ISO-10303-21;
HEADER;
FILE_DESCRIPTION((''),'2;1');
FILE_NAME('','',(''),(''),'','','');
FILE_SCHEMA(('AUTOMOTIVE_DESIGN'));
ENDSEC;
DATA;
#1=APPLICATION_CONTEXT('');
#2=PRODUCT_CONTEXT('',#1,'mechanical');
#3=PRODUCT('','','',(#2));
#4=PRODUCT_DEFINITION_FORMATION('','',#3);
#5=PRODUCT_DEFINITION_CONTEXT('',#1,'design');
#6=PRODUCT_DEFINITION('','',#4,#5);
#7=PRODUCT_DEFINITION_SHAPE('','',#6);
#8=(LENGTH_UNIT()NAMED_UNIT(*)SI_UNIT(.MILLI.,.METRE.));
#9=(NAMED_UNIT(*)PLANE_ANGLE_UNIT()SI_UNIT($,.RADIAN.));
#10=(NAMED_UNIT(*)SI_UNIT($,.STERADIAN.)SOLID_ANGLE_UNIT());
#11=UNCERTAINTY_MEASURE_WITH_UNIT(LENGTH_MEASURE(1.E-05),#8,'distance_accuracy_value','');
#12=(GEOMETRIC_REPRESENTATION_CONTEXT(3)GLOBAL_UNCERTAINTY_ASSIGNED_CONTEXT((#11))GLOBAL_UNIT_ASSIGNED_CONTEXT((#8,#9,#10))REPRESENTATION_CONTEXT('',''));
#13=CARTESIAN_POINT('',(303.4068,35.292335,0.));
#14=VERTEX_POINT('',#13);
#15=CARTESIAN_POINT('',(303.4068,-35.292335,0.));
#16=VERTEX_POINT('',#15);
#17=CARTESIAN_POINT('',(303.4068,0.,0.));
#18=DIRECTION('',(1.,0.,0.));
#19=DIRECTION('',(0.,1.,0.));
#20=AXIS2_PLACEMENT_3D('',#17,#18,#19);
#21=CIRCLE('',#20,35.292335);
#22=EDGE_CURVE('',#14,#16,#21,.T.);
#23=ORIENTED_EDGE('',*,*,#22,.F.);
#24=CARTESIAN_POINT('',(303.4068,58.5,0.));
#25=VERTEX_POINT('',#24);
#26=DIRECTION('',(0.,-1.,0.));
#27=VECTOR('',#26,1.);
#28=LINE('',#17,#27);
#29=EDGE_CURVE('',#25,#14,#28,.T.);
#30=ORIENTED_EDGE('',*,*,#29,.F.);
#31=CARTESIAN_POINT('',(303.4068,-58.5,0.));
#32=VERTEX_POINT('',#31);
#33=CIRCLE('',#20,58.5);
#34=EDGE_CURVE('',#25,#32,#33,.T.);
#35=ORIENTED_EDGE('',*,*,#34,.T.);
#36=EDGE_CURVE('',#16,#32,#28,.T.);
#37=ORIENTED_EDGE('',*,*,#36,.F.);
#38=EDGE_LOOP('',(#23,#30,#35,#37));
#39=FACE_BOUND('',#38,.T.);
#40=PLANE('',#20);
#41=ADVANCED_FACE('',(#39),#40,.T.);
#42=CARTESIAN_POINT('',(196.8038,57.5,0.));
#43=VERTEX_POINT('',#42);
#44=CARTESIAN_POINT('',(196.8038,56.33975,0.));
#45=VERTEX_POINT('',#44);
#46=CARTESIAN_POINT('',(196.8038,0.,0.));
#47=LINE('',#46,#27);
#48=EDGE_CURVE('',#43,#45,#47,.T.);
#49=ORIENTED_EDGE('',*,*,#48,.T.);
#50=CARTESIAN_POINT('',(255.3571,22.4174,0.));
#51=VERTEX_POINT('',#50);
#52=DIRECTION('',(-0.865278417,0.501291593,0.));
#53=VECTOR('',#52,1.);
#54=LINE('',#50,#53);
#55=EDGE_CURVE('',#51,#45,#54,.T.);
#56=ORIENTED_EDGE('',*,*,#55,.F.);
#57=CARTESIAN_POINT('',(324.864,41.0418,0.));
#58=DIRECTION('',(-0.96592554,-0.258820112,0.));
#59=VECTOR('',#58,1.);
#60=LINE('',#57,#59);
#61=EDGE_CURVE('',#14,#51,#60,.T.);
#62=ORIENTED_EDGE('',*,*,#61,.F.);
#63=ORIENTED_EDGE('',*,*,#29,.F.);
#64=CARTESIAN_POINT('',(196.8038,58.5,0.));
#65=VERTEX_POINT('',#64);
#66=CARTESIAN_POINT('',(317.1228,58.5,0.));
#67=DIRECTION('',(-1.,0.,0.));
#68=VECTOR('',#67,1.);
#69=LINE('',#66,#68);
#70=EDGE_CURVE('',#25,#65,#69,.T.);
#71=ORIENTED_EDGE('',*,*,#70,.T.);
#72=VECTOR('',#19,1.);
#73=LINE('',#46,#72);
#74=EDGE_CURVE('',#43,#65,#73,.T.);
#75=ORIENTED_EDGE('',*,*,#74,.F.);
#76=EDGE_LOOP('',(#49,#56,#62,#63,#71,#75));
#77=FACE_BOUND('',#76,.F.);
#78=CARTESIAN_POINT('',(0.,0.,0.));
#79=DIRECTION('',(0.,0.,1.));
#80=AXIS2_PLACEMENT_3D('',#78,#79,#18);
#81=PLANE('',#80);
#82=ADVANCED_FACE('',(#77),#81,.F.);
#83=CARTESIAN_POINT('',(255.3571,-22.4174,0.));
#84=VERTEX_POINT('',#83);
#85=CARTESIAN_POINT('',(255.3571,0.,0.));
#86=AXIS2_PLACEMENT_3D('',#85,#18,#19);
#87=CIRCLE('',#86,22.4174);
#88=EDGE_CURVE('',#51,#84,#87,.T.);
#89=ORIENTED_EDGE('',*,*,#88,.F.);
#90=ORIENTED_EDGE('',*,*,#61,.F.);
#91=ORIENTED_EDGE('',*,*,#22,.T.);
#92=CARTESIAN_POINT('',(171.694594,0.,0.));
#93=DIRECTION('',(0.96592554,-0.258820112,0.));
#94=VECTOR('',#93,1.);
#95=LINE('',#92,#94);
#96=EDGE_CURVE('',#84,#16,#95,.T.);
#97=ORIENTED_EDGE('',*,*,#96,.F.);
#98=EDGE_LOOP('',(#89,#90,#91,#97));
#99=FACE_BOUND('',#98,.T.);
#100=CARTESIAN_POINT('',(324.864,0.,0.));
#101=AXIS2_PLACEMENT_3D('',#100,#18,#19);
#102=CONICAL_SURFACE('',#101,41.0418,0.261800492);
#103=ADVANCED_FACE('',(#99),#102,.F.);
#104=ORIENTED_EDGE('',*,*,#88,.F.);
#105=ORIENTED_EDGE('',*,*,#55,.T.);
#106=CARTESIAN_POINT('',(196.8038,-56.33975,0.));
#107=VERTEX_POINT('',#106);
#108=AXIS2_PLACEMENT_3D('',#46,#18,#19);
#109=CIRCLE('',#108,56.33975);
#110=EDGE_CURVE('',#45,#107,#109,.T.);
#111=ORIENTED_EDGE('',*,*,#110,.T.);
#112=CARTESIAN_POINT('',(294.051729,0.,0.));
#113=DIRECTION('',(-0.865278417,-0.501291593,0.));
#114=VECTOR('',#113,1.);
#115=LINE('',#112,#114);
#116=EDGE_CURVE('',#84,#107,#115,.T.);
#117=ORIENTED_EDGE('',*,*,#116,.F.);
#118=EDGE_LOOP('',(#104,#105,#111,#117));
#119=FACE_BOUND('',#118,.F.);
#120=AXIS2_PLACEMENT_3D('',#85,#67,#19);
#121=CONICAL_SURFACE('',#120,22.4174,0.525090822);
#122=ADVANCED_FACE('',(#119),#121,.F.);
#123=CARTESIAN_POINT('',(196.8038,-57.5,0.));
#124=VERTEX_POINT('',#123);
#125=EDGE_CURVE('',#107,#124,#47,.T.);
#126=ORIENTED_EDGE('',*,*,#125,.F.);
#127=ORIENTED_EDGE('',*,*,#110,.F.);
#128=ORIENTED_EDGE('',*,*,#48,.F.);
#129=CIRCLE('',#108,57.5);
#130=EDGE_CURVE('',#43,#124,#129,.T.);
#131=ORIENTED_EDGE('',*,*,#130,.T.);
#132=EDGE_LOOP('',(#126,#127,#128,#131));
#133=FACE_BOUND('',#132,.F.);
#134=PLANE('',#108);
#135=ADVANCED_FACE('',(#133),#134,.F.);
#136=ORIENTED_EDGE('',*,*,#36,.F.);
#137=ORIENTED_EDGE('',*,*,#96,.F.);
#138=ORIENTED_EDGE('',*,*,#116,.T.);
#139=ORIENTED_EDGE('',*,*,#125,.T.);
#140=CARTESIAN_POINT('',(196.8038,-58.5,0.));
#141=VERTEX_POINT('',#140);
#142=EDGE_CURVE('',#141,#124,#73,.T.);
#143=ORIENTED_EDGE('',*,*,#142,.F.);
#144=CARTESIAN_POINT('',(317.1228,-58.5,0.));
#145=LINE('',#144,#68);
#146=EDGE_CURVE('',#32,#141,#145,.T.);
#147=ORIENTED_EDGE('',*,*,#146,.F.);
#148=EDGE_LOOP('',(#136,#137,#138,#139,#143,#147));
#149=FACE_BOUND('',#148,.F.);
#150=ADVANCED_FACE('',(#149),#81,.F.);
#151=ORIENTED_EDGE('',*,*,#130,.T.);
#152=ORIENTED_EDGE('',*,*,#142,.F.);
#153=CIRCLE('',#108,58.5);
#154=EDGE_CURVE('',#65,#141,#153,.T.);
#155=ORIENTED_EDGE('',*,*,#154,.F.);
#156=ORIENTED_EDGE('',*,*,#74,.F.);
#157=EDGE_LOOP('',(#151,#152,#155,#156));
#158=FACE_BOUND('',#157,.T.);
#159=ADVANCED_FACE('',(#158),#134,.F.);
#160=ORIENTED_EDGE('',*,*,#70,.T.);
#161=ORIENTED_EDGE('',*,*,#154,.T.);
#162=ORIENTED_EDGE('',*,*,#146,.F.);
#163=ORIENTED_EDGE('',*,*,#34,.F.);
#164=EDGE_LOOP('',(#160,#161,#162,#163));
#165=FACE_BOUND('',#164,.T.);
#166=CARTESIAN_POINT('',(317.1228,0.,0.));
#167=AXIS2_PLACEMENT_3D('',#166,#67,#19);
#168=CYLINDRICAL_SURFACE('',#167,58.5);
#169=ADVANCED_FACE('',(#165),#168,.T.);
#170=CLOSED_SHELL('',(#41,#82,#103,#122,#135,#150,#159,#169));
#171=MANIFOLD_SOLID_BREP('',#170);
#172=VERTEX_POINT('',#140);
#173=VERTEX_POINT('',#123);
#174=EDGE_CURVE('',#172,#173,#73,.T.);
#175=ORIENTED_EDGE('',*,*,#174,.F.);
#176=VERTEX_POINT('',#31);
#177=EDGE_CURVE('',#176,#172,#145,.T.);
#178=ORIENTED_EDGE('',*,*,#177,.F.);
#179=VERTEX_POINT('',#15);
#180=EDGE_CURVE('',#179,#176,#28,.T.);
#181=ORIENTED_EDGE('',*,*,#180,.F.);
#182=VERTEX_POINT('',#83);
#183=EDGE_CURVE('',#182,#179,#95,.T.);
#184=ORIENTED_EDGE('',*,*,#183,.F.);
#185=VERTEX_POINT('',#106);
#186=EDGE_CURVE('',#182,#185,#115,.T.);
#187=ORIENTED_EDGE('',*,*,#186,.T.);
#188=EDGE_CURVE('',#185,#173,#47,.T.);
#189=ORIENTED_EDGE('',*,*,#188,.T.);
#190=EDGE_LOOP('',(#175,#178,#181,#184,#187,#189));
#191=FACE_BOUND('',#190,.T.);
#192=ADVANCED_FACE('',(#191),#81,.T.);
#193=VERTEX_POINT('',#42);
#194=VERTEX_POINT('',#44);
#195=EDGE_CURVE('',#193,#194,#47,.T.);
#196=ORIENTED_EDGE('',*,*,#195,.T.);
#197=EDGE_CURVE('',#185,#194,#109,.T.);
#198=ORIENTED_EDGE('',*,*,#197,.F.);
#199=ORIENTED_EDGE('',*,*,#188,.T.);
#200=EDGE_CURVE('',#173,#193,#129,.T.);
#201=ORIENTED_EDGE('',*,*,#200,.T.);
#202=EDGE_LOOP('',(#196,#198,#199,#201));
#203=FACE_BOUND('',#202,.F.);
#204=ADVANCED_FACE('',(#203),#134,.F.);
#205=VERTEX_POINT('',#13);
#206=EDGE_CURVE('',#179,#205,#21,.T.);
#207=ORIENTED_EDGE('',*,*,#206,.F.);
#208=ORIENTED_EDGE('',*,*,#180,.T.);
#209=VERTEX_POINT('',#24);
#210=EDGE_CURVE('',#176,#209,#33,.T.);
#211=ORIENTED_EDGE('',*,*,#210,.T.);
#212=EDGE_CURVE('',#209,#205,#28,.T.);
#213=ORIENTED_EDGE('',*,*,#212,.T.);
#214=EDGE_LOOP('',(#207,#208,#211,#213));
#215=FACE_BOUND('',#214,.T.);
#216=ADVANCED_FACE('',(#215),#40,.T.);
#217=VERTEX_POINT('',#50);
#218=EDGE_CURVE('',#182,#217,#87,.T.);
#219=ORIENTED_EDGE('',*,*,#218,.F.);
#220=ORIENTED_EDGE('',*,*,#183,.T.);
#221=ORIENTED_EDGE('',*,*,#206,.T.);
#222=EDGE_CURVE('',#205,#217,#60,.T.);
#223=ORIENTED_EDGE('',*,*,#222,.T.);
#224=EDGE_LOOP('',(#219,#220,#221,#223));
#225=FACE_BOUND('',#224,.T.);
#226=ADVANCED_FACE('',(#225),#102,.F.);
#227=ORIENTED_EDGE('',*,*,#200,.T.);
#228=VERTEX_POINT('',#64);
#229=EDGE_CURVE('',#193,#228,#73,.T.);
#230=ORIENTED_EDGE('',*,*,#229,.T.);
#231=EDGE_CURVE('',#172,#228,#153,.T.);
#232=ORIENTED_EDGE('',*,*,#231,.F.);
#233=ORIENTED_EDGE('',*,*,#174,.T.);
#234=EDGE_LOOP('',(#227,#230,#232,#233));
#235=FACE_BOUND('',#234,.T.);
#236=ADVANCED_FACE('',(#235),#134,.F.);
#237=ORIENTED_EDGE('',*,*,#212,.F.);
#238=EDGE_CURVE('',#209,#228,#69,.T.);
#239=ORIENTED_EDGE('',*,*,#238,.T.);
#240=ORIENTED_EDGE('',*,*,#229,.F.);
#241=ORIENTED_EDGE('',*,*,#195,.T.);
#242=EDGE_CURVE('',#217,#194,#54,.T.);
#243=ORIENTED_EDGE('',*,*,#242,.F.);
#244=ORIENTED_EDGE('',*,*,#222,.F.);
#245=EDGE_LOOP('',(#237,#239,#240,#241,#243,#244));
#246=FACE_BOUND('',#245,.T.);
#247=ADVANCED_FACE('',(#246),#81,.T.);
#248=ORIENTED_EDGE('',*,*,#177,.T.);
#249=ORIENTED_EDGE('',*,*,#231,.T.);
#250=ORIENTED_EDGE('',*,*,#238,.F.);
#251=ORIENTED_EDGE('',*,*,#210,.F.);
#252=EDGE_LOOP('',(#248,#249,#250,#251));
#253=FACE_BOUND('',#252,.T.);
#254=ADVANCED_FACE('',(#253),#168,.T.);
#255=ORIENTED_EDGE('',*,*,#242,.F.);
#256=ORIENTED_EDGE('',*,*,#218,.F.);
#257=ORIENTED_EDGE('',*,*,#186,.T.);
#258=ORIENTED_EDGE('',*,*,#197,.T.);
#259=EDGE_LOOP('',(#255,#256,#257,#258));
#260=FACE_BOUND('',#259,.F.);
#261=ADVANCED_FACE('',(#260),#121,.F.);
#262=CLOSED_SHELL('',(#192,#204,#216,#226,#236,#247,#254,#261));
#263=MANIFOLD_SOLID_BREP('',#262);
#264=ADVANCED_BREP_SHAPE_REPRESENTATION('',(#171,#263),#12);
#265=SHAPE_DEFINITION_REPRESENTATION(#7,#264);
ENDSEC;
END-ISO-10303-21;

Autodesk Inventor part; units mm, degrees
ref_plane "YZ Plane" through (0, 0, 0) normal (1, 0, 0) x (0, 1, 0)
ref_plane "XZ Plane" through (0, 0, 0) normal (0, 1, 0) x (-1, 0, 0)
sketch "Sketch3" plane through (0, 0, 0) normal (0, 0, 1) x (1, 0, 0)
  line L0 (0, 54.5) -> (192, 54.5)
  line L1 (254.7886, 18.124) -> (254.7886, 0) construction
  line L2 (192, 54.5) -> (254.7886, 18.124)
  line L3 (254.7886, 18.124) -> (325.1228, 36.97)
  line L4 (254.7886, 18.124) -> (254.7886, 43.3259) construction
  line L5 (0, 0) -> (254.7886, 0)
  line L6 (325.1228, 36.97) -> (325.1228, 0)
  line L7 (192, 54.5) -> (254.7886, 18.124)
  line L8 (325.1228, 0) -> (305.1228, 0)
  line L9 (-65.0246, 0) -> (390.1474, 0)
  line L10 (0, 57.5) -> (192, 57.5)
  line L11 (193.5039, 57.0958) -> (255.2149, 21.3441)
  line L12 (255.2149, 21.3441) -> (325.1228, 40.0758)
  line L13 (325.1228, 36.97) -> (325.1228, 40.0758)
  line L14 (0, 54.5) -> (0, 57.5)
  line L15 (193.5039, 57.0958) -> (192.8038, 57.5)
  line L16 (193.5039, 57.0958) -> (200.0085, 57.0958) construction
  line L17 (192, 57.5) -> (192.8038, 57.5)
  line L18 (325.1228, 40.0758) -> (325.1228, 57.5)
  line L19 (317.1228, 57.5) -> (317.1228, 37.9322)
  line L20 (325.1228, 0) -> (325.1228, 58.5)
  line L21 (317.1228, 58.5) -> (317.1228, 57.5)
  line L22 (317.1228, 58.5) -> (325.1228, 58.5)
  line L23 (317.1228, 58.5) -> (155.0777, 58.5)
  line L24 (192, 57.5) -> (192, 71.51)
  line L25 (192, 57.5) -> (206.01, 57.5) construction
  line L26 (192.8038, 57.5) -> (192.8038, 62.5821)
  line L27 (196.8038, 57.5) -> (196.8038, 62.5821)
  line L28 (196.8038, 57.5) -> (196.8038, 54.0674)
  line L29 (317.1228, 58.5) -> (303.4068, 58.5)
  line L30 (303.4068, 58.5) -> (303.4068, 12.5113)
  line L31 (324.864, 41.0418) -> (255.3571, 22.4174)
  line L32 (255.3571, 22.4174) -> (194.0045, 57.9615)
  line L33 (194.0045, 57.9615) -> (193.3038, 58.366)
  point P0 (327.1228, 40.0758)
  point P1 (254.7886, 31.9804)
  point P2 (325.1228, 59.5)
  point P3 (321.1228, 58.5)
  point P4 (196.8038, 56.3397)
  point P5 (303.4068, 35.2923)
  point P6 (196.8038, 58.5)
  dimension "d102" = 18.124
  dimension "d103" = 54.5
  dimension "d104" = 192
  dimension "d105" = 20
  dimension "d106" = 3
  dimension "d107" = 3
  dimension "d108" = 3
  dimension "d109" = 150
  dimension "d110" = 8
  dimension "d111" = 58.5
  dimension "d112" = 90
  dimension "d113" = 4
  dimension "d114" = 13.716
  dimension "d115" = 1
revolve "Revolution2" add sketch "Sketch3" angle 360 about axis through (-65.0246, 0, 0) along (1, 0, 0) contours L31 L32 L28 L27 L23 L30
ref_plane "Work Plane2" through (0, 0, 59.5) normal (0, 0, 1) x (1, 0, 0)
split body "Split6" result two bodies by plane through (0, 0, 0) normal (0, 0, 1) first body at (232.3382, -57.5604, 7.1275)
properties part number "stainless steel space" material "Aluminum 6061"
